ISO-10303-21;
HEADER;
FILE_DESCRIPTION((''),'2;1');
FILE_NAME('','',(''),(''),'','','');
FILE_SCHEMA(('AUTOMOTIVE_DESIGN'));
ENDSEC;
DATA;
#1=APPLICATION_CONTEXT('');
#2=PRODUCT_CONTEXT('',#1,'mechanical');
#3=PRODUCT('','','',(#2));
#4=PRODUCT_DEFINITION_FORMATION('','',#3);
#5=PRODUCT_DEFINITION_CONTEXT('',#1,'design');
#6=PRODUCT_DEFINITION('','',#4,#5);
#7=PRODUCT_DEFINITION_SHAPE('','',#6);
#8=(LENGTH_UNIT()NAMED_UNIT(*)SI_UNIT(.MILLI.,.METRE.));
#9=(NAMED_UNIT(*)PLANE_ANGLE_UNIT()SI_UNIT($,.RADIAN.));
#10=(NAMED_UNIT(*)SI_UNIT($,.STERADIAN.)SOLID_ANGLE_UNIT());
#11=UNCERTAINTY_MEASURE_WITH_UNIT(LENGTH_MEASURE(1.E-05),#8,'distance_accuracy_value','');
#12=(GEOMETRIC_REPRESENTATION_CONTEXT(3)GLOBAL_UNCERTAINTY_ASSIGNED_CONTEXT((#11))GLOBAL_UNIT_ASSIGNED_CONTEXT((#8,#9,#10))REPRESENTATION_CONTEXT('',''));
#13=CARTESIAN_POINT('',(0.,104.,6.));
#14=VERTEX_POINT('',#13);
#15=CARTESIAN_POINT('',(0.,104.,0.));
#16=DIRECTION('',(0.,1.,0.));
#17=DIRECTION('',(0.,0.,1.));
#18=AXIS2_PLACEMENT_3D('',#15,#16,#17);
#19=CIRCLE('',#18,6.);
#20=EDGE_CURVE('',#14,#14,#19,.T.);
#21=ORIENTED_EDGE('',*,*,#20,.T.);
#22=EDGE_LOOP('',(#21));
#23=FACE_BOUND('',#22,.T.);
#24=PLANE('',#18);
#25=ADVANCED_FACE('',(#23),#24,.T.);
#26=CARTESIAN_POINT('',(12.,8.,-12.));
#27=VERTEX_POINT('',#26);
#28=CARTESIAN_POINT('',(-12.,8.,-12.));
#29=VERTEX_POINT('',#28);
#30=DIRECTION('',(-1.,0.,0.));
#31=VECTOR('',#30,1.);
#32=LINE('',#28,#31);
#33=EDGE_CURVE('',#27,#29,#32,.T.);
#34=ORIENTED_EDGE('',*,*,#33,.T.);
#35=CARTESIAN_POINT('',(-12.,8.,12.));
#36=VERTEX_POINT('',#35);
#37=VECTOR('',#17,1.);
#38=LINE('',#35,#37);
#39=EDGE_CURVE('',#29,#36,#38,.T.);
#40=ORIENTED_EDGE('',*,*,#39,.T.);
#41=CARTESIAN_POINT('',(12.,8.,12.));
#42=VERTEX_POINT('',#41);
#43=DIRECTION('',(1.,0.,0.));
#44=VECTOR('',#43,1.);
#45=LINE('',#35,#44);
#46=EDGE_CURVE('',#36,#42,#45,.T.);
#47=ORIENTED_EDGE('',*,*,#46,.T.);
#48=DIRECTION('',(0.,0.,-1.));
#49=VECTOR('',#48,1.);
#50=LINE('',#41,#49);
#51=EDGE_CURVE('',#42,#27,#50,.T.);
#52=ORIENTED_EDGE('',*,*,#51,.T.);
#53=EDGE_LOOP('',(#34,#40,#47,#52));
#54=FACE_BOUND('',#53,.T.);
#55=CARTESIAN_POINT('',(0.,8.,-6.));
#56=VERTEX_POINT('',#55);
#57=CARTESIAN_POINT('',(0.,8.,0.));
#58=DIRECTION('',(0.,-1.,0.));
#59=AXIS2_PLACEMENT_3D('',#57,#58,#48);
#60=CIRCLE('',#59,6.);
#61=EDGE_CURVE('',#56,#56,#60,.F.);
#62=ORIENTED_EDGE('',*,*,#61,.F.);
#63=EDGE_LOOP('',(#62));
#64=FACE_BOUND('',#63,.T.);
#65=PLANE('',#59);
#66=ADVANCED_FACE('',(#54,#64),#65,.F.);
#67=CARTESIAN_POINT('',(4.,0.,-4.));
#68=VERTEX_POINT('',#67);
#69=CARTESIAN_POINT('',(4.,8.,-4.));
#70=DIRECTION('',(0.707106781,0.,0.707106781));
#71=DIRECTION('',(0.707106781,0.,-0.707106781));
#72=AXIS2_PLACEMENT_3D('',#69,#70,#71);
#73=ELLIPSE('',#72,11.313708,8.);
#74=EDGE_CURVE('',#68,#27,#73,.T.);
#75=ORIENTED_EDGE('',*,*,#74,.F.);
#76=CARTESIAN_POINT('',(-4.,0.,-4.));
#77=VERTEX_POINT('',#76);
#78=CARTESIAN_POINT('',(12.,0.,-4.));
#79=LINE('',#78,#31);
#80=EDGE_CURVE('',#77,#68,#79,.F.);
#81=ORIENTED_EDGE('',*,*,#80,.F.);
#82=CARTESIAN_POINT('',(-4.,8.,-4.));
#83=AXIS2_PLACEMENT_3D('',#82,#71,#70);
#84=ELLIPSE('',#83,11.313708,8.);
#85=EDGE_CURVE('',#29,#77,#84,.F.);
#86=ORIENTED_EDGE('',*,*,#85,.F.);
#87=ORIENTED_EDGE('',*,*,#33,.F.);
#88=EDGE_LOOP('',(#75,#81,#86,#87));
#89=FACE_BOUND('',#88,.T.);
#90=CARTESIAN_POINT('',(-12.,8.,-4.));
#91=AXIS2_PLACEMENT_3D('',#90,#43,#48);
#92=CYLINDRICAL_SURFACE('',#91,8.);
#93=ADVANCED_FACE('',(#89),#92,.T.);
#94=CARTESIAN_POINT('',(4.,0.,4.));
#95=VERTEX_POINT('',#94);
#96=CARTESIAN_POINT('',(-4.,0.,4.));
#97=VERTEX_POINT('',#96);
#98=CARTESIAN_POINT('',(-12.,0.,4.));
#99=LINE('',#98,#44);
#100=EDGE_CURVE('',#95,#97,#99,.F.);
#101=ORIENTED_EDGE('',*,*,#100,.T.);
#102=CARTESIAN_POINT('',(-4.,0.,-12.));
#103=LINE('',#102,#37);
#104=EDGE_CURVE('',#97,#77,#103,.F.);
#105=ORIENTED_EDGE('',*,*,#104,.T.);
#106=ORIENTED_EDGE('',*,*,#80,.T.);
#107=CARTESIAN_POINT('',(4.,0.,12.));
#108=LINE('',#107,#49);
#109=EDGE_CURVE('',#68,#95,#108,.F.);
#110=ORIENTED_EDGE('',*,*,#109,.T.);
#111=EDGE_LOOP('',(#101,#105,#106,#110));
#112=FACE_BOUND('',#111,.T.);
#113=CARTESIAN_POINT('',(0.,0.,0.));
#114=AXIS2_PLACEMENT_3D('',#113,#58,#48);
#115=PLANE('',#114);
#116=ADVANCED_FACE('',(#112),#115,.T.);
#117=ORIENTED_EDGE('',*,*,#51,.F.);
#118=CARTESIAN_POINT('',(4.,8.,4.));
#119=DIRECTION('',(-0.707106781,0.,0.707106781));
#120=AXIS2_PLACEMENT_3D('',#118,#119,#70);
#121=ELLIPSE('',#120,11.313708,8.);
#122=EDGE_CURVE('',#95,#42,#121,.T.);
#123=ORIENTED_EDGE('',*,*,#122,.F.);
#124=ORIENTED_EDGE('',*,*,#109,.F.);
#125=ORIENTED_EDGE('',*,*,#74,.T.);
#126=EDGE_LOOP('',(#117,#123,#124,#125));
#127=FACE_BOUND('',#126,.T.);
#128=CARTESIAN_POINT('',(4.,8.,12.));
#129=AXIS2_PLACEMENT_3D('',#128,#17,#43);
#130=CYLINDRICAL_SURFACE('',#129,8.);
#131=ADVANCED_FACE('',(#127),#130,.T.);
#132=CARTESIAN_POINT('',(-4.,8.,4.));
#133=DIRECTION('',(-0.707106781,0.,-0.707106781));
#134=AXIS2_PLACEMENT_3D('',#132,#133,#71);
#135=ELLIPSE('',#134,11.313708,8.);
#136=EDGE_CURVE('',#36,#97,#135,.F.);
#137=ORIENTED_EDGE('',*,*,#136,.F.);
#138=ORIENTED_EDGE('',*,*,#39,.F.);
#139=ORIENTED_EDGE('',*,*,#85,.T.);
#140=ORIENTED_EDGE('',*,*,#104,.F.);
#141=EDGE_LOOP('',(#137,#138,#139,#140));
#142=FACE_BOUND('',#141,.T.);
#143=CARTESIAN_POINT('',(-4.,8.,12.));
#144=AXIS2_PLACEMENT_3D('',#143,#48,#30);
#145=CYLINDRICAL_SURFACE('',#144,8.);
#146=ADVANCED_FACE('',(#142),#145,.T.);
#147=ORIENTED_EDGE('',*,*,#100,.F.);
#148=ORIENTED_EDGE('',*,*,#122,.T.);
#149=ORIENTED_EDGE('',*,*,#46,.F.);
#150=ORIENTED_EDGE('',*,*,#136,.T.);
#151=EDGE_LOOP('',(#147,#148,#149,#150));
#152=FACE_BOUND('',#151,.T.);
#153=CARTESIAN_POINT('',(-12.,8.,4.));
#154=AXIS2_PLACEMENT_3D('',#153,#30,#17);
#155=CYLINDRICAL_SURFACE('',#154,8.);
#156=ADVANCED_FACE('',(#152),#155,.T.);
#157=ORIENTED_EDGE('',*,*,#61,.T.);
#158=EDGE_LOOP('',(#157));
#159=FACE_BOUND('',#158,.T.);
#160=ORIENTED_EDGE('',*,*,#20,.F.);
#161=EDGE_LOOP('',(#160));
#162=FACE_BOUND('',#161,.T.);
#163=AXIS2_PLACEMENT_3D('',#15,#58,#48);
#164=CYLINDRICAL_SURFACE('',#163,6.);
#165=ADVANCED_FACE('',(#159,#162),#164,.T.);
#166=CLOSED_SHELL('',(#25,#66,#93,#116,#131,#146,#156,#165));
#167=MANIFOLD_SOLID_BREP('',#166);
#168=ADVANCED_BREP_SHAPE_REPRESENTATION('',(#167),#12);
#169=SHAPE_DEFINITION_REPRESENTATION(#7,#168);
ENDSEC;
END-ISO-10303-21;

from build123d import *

# Parameters (mm, degrees)
SKETCH1_W           = 24
SKETCH1_H           = 24
BOSS_EXTRUDE1_DEPTH = 8
SKETCH2_R           = 6
BOSS_EXTRUDE2_DEPTH = 96
FILLET1_R           = 8


with BuildPart() as part:
    # Sketch1 → Boss-Extrude1 (new body)
    with BuildSketch(Plane(origin=(0, 0, 0), x_dir=(1, 0, 0), z_dir=(0, 1, 0))):
        Rectangle(SKETCH1_W, SKETCH1_H)
    extrude(amount=BOSS_EXTRUDE1_DEPTH)

    # Sketch2 → Boss-Extrude2 (add)
    with BuildSketch(Plane(origin=(0, 8, 0), x_dir=(1, 0, 0), z_dir=(0, 1, 0))):
        with Locations(Location((0, 0, 0), (0, 0, 90))):
            Circle(SKETCH2_R)
    extrude(amount=BOSS_EXTRUDE2_DEPTH)

    # Fillet1
    fillet1_edges = [part.edges().sort_by_distance(p)[0] for p in [
        (0, 0, 12),
        (12, 0, 0),
        (-12, 0, 0),
        (0, 0, -12),
    ]]
    fillet(fillet1_edges, radius=FILLET1_R - 0.0001)  # a hair under: the kernel refuses the full size


solid = part.part
